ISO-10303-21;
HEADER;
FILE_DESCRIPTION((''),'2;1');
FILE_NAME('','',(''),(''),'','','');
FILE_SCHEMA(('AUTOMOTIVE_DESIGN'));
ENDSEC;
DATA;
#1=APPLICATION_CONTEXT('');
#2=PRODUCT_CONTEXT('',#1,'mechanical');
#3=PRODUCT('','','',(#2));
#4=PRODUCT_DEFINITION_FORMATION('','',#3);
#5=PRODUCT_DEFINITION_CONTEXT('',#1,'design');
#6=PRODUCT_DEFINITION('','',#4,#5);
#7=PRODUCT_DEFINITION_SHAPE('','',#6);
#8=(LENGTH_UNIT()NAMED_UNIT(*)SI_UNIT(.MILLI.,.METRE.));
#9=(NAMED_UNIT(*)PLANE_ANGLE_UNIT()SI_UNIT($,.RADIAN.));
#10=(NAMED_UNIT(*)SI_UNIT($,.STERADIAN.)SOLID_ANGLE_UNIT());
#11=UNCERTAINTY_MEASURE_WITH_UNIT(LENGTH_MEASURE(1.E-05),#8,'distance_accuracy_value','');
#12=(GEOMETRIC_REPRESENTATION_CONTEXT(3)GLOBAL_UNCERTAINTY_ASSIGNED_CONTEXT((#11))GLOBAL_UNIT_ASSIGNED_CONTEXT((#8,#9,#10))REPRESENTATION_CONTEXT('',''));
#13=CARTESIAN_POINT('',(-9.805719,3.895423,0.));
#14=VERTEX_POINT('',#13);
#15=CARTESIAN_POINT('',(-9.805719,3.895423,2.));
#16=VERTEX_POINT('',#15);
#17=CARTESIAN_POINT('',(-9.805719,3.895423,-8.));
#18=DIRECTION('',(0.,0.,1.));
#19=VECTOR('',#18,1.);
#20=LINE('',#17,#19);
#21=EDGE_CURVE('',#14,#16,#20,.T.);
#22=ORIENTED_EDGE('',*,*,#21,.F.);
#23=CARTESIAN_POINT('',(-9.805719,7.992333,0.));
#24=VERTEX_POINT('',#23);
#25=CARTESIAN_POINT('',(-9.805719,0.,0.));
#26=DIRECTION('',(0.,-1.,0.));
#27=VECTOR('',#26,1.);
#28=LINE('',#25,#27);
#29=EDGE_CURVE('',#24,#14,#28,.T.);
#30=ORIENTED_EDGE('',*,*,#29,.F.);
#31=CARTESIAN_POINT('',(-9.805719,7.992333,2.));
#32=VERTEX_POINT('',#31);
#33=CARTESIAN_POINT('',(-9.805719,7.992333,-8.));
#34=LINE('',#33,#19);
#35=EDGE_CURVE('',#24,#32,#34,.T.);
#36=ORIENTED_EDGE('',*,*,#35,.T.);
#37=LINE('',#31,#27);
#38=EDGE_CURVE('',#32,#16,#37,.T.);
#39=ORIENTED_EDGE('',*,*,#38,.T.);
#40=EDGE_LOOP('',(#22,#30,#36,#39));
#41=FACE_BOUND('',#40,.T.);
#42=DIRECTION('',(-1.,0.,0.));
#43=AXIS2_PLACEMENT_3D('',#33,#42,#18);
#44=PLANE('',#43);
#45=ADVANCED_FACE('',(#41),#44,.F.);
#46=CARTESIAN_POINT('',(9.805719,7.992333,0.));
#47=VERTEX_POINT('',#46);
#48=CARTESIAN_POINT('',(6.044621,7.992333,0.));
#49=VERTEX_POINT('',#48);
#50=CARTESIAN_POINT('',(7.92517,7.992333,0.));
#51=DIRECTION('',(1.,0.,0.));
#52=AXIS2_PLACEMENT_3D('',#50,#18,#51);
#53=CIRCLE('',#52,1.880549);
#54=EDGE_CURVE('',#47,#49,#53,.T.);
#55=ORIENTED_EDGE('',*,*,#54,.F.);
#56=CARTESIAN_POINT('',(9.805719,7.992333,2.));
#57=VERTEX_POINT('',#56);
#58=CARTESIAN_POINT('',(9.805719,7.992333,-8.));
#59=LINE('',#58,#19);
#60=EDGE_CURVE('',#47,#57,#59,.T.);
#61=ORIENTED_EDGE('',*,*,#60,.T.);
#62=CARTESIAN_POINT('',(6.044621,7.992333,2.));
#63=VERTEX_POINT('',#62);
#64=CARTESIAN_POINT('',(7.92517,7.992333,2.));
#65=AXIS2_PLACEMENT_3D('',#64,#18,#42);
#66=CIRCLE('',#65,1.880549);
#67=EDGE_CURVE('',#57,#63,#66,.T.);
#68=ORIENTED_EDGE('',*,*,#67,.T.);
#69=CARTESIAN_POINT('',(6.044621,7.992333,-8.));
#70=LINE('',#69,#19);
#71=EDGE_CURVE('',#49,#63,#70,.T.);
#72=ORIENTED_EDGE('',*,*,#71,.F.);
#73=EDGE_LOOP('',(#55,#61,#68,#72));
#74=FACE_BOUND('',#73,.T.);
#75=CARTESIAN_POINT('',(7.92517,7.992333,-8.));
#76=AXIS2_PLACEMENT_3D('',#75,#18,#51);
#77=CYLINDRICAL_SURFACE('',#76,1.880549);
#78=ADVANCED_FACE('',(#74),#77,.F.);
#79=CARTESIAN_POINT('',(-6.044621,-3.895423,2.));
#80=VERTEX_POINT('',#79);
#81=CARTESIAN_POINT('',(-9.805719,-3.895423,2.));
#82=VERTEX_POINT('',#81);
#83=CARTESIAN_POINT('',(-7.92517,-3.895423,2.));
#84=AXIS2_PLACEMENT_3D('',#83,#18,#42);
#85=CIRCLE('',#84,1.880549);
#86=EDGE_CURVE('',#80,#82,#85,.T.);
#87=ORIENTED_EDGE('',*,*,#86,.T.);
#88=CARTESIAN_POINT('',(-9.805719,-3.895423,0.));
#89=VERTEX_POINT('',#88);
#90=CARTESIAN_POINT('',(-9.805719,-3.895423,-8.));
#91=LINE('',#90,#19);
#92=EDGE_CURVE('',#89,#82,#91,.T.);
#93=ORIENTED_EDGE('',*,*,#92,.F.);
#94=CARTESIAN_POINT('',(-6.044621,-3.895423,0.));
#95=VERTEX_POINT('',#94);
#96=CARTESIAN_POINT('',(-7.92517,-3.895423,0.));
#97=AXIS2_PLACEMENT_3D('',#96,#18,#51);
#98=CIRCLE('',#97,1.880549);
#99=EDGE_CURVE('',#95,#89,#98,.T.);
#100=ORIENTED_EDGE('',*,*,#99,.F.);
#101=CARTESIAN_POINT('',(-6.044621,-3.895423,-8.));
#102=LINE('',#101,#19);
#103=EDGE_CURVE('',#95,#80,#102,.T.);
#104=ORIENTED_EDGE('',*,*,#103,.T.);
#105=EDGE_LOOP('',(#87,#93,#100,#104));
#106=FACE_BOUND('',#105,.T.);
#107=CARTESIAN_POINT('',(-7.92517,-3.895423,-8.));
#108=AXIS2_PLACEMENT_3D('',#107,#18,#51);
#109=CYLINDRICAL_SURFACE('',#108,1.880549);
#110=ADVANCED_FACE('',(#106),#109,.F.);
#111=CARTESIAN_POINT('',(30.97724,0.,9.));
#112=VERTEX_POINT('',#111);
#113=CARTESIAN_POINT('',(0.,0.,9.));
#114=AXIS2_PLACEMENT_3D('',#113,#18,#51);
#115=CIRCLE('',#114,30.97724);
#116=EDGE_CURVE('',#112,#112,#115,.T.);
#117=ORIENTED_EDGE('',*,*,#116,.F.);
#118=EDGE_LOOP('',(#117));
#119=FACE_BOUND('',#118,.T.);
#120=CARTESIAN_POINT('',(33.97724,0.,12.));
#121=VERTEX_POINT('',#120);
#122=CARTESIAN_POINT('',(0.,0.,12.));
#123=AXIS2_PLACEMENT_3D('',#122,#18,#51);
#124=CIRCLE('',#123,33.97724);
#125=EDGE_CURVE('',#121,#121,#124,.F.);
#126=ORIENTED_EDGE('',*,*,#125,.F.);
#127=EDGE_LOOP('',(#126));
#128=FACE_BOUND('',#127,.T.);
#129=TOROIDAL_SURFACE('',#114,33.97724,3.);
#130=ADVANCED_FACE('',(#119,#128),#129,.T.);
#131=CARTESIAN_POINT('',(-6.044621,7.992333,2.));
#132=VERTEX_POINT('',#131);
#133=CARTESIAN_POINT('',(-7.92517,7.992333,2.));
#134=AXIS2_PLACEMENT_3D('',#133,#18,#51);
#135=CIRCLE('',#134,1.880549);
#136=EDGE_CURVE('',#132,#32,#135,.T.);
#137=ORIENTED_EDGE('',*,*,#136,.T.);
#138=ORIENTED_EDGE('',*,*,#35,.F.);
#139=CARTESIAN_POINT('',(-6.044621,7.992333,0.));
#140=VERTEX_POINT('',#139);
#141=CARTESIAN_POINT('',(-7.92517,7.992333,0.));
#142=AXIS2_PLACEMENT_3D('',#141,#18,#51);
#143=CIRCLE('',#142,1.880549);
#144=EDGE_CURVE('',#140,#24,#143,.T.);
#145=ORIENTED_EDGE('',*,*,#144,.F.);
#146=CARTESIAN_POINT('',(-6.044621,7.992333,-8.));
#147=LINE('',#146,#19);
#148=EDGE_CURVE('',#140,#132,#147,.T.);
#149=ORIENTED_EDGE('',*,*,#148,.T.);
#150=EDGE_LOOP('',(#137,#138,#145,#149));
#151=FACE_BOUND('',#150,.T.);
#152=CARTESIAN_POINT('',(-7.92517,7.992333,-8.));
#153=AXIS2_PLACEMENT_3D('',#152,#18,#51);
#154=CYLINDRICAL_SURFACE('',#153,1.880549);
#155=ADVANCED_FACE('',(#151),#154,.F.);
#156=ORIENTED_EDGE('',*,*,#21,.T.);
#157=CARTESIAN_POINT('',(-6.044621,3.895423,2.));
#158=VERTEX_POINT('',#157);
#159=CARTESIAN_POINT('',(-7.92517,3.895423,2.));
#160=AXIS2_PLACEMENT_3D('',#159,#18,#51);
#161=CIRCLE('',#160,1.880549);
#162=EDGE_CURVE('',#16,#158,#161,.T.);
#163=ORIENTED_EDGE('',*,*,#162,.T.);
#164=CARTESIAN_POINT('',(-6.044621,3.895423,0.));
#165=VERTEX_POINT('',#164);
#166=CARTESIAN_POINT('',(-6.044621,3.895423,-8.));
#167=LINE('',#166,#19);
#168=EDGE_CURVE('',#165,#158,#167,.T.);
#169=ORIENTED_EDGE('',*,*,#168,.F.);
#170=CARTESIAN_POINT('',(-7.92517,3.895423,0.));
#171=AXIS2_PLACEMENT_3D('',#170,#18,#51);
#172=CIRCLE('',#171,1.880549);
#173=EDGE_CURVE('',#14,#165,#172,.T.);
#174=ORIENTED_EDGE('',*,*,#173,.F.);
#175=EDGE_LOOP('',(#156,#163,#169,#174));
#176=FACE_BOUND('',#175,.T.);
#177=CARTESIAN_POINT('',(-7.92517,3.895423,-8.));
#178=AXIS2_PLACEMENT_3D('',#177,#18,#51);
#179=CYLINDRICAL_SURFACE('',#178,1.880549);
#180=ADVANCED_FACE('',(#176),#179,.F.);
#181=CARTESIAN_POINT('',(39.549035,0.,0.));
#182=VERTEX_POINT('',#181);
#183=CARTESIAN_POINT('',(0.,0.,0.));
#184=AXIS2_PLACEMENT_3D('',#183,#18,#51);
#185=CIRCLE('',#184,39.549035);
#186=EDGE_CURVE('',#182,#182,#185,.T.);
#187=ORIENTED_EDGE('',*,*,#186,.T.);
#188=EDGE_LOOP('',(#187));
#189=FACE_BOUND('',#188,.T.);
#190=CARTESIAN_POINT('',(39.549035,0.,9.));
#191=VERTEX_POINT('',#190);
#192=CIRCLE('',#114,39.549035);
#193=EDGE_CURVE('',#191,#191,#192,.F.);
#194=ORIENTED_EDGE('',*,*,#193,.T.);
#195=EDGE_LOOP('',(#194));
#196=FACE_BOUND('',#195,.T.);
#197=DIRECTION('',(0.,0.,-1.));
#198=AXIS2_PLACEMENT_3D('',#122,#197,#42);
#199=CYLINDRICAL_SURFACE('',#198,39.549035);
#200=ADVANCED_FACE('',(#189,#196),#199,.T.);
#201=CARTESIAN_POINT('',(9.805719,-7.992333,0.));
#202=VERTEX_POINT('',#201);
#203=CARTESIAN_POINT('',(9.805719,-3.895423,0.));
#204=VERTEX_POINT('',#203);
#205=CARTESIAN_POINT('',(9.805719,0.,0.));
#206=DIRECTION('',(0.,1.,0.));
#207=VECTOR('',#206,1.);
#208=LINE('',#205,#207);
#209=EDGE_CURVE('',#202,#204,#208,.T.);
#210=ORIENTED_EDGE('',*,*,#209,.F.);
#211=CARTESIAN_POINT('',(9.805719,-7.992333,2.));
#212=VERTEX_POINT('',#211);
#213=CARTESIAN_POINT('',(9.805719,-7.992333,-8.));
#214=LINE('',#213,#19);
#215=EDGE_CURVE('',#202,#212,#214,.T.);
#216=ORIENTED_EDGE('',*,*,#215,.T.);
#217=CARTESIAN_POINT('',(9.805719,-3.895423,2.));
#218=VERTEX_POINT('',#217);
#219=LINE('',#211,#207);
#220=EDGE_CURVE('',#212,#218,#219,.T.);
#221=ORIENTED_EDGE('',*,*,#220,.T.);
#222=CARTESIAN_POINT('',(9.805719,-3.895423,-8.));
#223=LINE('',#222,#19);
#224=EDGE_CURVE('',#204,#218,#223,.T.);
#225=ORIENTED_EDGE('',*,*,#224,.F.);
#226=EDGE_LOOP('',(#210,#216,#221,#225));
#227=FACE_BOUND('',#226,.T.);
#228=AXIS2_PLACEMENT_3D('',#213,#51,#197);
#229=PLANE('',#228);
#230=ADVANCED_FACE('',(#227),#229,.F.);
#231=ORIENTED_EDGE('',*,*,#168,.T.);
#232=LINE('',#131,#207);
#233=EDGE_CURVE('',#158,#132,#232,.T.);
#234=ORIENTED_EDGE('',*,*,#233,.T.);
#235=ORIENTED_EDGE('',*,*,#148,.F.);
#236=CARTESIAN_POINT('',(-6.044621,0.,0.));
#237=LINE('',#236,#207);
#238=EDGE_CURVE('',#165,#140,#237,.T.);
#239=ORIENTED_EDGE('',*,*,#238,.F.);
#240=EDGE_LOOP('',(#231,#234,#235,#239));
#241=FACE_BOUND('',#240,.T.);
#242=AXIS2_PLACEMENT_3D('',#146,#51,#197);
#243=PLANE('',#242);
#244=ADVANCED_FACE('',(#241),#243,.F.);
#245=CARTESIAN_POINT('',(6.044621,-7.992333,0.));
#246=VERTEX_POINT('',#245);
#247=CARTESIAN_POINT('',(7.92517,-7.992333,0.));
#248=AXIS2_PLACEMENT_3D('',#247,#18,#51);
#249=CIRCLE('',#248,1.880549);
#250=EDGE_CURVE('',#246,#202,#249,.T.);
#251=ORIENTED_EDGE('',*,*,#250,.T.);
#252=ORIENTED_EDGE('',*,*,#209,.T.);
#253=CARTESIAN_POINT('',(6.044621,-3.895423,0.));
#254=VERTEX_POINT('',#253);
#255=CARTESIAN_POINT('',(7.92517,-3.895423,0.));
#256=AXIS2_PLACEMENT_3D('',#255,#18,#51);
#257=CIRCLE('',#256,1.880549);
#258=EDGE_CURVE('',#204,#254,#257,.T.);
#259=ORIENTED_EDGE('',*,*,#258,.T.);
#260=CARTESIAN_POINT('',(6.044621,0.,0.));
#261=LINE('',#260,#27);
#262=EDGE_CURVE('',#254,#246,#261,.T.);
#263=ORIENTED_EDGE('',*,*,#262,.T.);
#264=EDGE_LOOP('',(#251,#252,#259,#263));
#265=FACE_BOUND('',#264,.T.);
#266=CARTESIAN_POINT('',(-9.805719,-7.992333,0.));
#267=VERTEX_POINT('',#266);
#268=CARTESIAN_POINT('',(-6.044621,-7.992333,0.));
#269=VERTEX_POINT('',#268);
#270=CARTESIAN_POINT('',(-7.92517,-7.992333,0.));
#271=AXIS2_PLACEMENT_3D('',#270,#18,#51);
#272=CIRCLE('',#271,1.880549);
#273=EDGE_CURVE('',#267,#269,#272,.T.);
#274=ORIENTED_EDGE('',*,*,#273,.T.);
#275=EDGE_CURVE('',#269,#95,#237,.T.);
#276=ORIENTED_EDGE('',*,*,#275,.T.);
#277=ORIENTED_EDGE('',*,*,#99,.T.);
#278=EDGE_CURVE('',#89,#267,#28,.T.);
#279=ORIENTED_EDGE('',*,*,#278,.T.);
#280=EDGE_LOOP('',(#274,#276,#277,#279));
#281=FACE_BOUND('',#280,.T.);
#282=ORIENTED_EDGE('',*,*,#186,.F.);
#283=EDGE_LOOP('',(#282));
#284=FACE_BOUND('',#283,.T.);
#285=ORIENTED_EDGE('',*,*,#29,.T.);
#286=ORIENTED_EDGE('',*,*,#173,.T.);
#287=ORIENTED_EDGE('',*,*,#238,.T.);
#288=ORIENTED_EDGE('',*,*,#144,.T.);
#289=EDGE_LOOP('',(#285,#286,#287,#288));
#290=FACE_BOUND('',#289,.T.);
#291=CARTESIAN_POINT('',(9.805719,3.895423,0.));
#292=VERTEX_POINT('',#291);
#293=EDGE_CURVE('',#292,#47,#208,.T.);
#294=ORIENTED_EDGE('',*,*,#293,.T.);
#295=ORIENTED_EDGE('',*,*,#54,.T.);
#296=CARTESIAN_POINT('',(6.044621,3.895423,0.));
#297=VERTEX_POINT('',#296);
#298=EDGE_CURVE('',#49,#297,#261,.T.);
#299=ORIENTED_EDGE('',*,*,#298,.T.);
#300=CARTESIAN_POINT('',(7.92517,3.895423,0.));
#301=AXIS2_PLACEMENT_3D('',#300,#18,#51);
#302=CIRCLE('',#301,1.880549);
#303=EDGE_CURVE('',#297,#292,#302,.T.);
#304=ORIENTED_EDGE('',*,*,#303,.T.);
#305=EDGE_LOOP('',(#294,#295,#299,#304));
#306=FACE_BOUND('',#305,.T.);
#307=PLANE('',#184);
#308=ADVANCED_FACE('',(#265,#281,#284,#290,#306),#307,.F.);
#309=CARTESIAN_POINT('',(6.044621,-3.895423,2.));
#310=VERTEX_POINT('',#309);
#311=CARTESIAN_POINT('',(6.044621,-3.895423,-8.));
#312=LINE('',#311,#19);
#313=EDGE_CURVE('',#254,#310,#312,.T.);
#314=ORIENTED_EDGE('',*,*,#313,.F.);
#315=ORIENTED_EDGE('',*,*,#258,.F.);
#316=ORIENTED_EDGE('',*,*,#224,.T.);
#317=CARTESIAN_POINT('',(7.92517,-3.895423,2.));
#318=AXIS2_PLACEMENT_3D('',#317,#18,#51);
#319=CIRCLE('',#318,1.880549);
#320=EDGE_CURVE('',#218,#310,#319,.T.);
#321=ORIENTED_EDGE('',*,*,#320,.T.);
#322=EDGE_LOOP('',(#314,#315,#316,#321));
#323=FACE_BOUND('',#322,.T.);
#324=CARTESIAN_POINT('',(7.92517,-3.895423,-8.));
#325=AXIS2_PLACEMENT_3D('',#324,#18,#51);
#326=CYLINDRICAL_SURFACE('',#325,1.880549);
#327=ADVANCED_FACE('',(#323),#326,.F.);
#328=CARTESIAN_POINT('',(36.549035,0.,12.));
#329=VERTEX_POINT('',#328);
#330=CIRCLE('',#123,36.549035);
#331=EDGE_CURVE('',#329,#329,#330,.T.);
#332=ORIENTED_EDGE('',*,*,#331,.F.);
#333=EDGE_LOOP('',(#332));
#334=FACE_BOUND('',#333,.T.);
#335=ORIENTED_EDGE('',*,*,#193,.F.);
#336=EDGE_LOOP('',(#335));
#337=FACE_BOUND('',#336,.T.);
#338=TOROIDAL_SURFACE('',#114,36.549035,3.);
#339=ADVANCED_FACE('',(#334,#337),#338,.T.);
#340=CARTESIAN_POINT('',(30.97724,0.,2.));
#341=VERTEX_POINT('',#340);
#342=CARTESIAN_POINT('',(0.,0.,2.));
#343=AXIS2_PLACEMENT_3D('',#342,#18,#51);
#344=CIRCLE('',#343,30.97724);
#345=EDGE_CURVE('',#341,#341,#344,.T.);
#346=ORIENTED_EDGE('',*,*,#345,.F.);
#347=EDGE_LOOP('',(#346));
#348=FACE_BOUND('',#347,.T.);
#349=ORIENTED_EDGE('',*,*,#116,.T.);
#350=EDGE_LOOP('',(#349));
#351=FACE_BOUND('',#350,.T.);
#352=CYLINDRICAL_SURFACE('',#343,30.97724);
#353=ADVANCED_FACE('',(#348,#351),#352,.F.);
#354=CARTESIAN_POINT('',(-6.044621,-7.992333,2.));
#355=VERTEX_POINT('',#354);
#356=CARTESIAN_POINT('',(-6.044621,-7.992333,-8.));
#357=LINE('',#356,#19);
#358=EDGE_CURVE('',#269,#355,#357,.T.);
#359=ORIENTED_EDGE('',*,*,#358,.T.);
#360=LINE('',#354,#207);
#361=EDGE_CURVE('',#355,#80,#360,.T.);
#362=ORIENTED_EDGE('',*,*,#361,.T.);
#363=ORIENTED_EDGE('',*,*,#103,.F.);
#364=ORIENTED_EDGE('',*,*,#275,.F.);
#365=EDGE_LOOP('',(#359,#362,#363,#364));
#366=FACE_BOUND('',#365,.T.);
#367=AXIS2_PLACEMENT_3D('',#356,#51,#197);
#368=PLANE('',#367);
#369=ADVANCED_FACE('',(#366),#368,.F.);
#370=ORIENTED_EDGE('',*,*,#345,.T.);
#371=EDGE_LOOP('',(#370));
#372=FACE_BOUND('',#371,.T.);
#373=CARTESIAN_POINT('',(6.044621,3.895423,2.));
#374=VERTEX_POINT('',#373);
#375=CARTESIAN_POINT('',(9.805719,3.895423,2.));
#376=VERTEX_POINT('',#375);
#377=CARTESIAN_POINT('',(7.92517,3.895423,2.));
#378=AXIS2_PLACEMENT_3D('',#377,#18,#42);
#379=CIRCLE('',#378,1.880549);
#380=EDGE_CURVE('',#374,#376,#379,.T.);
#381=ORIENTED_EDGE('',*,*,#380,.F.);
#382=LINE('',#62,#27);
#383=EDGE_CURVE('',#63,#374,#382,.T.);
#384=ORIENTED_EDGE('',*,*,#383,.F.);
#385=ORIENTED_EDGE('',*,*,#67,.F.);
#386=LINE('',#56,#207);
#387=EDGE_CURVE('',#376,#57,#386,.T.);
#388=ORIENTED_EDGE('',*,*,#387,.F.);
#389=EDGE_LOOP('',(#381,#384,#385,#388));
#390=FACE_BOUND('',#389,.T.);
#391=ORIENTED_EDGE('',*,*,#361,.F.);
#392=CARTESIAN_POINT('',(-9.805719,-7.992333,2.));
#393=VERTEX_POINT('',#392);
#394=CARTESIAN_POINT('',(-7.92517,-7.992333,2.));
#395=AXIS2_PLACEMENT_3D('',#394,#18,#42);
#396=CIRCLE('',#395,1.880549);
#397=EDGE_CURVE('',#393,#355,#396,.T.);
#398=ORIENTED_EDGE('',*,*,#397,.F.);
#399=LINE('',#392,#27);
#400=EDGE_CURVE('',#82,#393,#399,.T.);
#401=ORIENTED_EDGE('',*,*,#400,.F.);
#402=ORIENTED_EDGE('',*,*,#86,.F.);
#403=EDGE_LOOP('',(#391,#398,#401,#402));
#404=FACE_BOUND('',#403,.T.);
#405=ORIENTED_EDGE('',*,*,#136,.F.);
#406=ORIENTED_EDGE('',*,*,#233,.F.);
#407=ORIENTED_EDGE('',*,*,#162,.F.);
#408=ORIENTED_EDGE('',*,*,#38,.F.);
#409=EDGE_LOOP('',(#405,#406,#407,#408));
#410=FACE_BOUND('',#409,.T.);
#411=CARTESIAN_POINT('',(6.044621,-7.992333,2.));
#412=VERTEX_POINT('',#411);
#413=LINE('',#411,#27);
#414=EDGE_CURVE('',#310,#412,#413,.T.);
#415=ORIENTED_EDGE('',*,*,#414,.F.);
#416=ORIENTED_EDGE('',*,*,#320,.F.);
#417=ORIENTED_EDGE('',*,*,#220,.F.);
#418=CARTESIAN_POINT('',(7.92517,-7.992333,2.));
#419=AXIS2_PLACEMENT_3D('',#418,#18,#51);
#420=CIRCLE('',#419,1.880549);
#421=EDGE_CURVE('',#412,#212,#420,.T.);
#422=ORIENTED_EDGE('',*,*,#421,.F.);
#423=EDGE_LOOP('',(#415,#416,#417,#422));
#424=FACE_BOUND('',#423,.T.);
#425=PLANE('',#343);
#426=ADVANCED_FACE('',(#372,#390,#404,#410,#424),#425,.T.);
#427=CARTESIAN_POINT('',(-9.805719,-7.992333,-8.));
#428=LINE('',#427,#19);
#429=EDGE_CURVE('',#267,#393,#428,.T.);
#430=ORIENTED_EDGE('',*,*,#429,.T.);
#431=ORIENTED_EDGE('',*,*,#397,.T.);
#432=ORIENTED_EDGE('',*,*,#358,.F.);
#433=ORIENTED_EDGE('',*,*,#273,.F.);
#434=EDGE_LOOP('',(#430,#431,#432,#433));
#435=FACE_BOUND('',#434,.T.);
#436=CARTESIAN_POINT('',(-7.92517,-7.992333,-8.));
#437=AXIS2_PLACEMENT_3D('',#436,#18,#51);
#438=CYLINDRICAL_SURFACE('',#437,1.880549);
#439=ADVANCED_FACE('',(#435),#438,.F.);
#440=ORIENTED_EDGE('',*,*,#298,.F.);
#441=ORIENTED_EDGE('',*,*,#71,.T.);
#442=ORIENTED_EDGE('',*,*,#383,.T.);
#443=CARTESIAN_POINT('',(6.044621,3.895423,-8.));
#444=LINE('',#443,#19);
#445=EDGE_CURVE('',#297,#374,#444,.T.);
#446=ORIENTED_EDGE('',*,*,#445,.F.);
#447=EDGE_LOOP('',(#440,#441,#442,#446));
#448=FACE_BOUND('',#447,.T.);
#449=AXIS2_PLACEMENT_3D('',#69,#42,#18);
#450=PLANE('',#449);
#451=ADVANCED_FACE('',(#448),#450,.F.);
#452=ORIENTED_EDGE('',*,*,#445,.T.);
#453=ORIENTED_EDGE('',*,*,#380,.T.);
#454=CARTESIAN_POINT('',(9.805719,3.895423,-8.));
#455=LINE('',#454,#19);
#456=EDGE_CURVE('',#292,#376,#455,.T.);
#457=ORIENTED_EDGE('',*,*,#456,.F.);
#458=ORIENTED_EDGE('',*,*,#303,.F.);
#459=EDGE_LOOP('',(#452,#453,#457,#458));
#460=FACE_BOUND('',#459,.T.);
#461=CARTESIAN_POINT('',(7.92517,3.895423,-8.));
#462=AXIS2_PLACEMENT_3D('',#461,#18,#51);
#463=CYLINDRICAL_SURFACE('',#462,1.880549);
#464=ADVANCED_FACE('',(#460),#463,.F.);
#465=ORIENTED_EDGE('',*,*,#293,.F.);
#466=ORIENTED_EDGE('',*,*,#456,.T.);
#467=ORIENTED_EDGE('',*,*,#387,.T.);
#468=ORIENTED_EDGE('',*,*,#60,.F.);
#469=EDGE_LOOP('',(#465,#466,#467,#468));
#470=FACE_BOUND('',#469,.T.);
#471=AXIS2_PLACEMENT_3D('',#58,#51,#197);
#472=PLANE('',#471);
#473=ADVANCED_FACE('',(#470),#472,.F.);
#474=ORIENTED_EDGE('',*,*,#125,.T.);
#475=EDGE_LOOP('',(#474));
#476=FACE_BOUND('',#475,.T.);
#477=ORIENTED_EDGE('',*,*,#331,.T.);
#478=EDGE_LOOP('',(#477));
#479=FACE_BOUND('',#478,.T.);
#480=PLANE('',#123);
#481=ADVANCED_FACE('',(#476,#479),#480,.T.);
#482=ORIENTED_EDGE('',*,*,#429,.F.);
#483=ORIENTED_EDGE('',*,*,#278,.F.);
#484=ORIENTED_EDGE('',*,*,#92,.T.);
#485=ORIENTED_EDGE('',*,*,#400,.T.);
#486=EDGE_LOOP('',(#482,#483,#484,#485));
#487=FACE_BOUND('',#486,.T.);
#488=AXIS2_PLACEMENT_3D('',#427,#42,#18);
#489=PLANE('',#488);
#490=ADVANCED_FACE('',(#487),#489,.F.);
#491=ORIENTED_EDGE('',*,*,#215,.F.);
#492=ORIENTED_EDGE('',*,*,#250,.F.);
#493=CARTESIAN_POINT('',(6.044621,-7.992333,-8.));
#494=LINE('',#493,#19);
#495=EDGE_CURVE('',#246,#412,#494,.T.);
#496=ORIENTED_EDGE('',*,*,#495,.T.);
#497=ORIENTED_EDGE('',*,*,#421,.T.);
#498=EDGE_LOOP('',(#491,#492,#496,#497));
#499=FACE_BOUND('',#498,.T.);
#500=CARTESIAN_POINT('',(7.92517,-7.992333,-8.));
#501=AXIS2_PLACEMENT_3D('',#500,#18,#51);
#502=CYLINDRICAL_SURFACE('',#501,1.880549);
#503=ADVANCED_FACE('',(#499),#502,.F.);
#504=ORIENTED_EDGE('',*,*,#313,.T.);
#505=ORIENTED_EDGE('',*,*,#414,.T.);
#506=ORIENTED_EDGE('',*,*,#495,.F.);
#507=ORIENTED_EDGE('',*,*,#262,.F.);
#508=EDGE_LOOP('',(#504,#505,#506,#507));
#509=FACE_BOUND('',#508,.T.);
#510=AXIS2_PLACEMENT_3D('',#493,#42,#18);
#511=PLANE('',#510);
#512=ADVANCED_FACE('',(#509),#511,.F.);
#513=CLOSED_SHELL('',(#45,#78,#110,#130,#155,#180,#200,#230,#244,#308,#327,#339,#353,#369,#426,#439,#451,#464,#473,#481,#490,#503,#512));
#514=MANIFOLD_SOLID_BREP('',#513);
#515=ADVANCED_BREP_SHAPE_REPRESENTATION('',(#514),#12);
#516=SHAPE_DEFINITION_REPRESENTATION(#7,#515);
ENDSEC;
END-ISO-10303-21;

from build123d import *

# Parameters (mm, degrees)
BOSS_EXTRUDE1_OUTLINE_R = 39.549034963
BOSS_EXTRUDE1_DEPTH     = 12
SKETCH2_R               = 30.977240476
CUT_EXTRUDE1_DEPTH      = 10
FILLET1_R               = 3
FILLET3_R               = 3
CUT_EXTRUDE2_DEPTH      = 10


# Read off the part's stored shape, not the designer's step: Boss-Extrude1
with BuildPart() as part:
    # Boss-Extrude1 outline → Boss-Extrude1 (new body)
    with BuildSketch(Plane.XY):
        Circle(BOSS_EXTRUDE1_OUTLINE_R)
    extrude(amount=BOSS_EXTRUDE1_DEPTH)

    # Sketch2 → Cut-Extrude1 (cut)
    with BuildSketch(Plane.XY.offset(12)):
        Circle(SKETCH2_R)
    extrude(amount=-CUT_EXTRUDE1_DEPTH, mode=Mode.SUBTRACT)

    # Fillet1
    fillet1_edges = [part.edges().sort_by_distance(p)[0] for p in [
        (-39.549034963, 0, 12),
    ]]
    fillet(fillet1_edges, radius=FILLET1_R)

    # Fillet3
    fillet3_edges = [part.edges().sort_by_distance(p)[0] for p in [
        (-30.977240476, 0, 12),
    ]]
    fillet(fillet3_edges, radius=FILLET3_R)

    # Sketch3 → Cut-Extrude2 (cut)
    with BuildSketch(Plane.XY.offset(2)):
        with BuildLine():
            Line((-6.044621496, 7.992332867), (-6.044621496, 3.895422742))
            ThreePointArc((-6.044621496, 3.895422742), (-7.925170406, 2.014873832), (-9.805719315, 3.895422742))
            Line((-9.805719315, 3.895422742), (-9.805719315, 7.992332867))
            ThreePointArc((-9.805719315, 7.992332867), (-7.925170406, 9.872881776), (-6.044621496, 7.992332867))
        make_face()
        with BuildLine():
            Line((6.044621496, 7.992332867), (6.044621496, 3.895422742))
            ThreePointArc((6.044621496, 3.895422742), (7.925170406, 2.014873832), (9.805719315, 3.895422742))
            Line((9.805719315, 3.895422742), (9.805719315, 7.992332867))
            ThreePointArc((9.805719315, 7.992332867), (7.925170406, 9.872881776), (6.044621496, 7.992332867))
        make_face()
        with BuildLine():
            Line((6.044621496, -7.992332867), (6.044621496, -3.895422742))
            ThreePointArc((6.044621496, -3.895422742), (7.925170406, -2.014873832), (9.805719315, -3.895422742))
            Line((9.805719315, -3.895422742), (9.805719315, -7.992332867))
            ThreePointArc((9.805719315, -7.992332867), (7.925170406, -9.872881776), (6.044621496, -7.992332867))
        make_face()
        with BuildLine():
            Line((-6.044621496, -7.992332867), (-6.044621496, -3.895422742))
            ThreePointArc((-6.044621496, -3.895422742), (-7.925170406, -2.014873832), (-9.805719315, -3.895422742))
            Line((-9.805719315, -3.895422742), (-9.805719315, -7.992332867))
            ThreePointArc((-9.805719315, -7.992332867), (-7.925170406, -9.872881776), (-6.044621496, -7.992332867))
        make_face()
    extrude(amount=-CUT_EXTRUDE2_DEPTH, mode=Mode.SUBTRACT)


solid = part.part
